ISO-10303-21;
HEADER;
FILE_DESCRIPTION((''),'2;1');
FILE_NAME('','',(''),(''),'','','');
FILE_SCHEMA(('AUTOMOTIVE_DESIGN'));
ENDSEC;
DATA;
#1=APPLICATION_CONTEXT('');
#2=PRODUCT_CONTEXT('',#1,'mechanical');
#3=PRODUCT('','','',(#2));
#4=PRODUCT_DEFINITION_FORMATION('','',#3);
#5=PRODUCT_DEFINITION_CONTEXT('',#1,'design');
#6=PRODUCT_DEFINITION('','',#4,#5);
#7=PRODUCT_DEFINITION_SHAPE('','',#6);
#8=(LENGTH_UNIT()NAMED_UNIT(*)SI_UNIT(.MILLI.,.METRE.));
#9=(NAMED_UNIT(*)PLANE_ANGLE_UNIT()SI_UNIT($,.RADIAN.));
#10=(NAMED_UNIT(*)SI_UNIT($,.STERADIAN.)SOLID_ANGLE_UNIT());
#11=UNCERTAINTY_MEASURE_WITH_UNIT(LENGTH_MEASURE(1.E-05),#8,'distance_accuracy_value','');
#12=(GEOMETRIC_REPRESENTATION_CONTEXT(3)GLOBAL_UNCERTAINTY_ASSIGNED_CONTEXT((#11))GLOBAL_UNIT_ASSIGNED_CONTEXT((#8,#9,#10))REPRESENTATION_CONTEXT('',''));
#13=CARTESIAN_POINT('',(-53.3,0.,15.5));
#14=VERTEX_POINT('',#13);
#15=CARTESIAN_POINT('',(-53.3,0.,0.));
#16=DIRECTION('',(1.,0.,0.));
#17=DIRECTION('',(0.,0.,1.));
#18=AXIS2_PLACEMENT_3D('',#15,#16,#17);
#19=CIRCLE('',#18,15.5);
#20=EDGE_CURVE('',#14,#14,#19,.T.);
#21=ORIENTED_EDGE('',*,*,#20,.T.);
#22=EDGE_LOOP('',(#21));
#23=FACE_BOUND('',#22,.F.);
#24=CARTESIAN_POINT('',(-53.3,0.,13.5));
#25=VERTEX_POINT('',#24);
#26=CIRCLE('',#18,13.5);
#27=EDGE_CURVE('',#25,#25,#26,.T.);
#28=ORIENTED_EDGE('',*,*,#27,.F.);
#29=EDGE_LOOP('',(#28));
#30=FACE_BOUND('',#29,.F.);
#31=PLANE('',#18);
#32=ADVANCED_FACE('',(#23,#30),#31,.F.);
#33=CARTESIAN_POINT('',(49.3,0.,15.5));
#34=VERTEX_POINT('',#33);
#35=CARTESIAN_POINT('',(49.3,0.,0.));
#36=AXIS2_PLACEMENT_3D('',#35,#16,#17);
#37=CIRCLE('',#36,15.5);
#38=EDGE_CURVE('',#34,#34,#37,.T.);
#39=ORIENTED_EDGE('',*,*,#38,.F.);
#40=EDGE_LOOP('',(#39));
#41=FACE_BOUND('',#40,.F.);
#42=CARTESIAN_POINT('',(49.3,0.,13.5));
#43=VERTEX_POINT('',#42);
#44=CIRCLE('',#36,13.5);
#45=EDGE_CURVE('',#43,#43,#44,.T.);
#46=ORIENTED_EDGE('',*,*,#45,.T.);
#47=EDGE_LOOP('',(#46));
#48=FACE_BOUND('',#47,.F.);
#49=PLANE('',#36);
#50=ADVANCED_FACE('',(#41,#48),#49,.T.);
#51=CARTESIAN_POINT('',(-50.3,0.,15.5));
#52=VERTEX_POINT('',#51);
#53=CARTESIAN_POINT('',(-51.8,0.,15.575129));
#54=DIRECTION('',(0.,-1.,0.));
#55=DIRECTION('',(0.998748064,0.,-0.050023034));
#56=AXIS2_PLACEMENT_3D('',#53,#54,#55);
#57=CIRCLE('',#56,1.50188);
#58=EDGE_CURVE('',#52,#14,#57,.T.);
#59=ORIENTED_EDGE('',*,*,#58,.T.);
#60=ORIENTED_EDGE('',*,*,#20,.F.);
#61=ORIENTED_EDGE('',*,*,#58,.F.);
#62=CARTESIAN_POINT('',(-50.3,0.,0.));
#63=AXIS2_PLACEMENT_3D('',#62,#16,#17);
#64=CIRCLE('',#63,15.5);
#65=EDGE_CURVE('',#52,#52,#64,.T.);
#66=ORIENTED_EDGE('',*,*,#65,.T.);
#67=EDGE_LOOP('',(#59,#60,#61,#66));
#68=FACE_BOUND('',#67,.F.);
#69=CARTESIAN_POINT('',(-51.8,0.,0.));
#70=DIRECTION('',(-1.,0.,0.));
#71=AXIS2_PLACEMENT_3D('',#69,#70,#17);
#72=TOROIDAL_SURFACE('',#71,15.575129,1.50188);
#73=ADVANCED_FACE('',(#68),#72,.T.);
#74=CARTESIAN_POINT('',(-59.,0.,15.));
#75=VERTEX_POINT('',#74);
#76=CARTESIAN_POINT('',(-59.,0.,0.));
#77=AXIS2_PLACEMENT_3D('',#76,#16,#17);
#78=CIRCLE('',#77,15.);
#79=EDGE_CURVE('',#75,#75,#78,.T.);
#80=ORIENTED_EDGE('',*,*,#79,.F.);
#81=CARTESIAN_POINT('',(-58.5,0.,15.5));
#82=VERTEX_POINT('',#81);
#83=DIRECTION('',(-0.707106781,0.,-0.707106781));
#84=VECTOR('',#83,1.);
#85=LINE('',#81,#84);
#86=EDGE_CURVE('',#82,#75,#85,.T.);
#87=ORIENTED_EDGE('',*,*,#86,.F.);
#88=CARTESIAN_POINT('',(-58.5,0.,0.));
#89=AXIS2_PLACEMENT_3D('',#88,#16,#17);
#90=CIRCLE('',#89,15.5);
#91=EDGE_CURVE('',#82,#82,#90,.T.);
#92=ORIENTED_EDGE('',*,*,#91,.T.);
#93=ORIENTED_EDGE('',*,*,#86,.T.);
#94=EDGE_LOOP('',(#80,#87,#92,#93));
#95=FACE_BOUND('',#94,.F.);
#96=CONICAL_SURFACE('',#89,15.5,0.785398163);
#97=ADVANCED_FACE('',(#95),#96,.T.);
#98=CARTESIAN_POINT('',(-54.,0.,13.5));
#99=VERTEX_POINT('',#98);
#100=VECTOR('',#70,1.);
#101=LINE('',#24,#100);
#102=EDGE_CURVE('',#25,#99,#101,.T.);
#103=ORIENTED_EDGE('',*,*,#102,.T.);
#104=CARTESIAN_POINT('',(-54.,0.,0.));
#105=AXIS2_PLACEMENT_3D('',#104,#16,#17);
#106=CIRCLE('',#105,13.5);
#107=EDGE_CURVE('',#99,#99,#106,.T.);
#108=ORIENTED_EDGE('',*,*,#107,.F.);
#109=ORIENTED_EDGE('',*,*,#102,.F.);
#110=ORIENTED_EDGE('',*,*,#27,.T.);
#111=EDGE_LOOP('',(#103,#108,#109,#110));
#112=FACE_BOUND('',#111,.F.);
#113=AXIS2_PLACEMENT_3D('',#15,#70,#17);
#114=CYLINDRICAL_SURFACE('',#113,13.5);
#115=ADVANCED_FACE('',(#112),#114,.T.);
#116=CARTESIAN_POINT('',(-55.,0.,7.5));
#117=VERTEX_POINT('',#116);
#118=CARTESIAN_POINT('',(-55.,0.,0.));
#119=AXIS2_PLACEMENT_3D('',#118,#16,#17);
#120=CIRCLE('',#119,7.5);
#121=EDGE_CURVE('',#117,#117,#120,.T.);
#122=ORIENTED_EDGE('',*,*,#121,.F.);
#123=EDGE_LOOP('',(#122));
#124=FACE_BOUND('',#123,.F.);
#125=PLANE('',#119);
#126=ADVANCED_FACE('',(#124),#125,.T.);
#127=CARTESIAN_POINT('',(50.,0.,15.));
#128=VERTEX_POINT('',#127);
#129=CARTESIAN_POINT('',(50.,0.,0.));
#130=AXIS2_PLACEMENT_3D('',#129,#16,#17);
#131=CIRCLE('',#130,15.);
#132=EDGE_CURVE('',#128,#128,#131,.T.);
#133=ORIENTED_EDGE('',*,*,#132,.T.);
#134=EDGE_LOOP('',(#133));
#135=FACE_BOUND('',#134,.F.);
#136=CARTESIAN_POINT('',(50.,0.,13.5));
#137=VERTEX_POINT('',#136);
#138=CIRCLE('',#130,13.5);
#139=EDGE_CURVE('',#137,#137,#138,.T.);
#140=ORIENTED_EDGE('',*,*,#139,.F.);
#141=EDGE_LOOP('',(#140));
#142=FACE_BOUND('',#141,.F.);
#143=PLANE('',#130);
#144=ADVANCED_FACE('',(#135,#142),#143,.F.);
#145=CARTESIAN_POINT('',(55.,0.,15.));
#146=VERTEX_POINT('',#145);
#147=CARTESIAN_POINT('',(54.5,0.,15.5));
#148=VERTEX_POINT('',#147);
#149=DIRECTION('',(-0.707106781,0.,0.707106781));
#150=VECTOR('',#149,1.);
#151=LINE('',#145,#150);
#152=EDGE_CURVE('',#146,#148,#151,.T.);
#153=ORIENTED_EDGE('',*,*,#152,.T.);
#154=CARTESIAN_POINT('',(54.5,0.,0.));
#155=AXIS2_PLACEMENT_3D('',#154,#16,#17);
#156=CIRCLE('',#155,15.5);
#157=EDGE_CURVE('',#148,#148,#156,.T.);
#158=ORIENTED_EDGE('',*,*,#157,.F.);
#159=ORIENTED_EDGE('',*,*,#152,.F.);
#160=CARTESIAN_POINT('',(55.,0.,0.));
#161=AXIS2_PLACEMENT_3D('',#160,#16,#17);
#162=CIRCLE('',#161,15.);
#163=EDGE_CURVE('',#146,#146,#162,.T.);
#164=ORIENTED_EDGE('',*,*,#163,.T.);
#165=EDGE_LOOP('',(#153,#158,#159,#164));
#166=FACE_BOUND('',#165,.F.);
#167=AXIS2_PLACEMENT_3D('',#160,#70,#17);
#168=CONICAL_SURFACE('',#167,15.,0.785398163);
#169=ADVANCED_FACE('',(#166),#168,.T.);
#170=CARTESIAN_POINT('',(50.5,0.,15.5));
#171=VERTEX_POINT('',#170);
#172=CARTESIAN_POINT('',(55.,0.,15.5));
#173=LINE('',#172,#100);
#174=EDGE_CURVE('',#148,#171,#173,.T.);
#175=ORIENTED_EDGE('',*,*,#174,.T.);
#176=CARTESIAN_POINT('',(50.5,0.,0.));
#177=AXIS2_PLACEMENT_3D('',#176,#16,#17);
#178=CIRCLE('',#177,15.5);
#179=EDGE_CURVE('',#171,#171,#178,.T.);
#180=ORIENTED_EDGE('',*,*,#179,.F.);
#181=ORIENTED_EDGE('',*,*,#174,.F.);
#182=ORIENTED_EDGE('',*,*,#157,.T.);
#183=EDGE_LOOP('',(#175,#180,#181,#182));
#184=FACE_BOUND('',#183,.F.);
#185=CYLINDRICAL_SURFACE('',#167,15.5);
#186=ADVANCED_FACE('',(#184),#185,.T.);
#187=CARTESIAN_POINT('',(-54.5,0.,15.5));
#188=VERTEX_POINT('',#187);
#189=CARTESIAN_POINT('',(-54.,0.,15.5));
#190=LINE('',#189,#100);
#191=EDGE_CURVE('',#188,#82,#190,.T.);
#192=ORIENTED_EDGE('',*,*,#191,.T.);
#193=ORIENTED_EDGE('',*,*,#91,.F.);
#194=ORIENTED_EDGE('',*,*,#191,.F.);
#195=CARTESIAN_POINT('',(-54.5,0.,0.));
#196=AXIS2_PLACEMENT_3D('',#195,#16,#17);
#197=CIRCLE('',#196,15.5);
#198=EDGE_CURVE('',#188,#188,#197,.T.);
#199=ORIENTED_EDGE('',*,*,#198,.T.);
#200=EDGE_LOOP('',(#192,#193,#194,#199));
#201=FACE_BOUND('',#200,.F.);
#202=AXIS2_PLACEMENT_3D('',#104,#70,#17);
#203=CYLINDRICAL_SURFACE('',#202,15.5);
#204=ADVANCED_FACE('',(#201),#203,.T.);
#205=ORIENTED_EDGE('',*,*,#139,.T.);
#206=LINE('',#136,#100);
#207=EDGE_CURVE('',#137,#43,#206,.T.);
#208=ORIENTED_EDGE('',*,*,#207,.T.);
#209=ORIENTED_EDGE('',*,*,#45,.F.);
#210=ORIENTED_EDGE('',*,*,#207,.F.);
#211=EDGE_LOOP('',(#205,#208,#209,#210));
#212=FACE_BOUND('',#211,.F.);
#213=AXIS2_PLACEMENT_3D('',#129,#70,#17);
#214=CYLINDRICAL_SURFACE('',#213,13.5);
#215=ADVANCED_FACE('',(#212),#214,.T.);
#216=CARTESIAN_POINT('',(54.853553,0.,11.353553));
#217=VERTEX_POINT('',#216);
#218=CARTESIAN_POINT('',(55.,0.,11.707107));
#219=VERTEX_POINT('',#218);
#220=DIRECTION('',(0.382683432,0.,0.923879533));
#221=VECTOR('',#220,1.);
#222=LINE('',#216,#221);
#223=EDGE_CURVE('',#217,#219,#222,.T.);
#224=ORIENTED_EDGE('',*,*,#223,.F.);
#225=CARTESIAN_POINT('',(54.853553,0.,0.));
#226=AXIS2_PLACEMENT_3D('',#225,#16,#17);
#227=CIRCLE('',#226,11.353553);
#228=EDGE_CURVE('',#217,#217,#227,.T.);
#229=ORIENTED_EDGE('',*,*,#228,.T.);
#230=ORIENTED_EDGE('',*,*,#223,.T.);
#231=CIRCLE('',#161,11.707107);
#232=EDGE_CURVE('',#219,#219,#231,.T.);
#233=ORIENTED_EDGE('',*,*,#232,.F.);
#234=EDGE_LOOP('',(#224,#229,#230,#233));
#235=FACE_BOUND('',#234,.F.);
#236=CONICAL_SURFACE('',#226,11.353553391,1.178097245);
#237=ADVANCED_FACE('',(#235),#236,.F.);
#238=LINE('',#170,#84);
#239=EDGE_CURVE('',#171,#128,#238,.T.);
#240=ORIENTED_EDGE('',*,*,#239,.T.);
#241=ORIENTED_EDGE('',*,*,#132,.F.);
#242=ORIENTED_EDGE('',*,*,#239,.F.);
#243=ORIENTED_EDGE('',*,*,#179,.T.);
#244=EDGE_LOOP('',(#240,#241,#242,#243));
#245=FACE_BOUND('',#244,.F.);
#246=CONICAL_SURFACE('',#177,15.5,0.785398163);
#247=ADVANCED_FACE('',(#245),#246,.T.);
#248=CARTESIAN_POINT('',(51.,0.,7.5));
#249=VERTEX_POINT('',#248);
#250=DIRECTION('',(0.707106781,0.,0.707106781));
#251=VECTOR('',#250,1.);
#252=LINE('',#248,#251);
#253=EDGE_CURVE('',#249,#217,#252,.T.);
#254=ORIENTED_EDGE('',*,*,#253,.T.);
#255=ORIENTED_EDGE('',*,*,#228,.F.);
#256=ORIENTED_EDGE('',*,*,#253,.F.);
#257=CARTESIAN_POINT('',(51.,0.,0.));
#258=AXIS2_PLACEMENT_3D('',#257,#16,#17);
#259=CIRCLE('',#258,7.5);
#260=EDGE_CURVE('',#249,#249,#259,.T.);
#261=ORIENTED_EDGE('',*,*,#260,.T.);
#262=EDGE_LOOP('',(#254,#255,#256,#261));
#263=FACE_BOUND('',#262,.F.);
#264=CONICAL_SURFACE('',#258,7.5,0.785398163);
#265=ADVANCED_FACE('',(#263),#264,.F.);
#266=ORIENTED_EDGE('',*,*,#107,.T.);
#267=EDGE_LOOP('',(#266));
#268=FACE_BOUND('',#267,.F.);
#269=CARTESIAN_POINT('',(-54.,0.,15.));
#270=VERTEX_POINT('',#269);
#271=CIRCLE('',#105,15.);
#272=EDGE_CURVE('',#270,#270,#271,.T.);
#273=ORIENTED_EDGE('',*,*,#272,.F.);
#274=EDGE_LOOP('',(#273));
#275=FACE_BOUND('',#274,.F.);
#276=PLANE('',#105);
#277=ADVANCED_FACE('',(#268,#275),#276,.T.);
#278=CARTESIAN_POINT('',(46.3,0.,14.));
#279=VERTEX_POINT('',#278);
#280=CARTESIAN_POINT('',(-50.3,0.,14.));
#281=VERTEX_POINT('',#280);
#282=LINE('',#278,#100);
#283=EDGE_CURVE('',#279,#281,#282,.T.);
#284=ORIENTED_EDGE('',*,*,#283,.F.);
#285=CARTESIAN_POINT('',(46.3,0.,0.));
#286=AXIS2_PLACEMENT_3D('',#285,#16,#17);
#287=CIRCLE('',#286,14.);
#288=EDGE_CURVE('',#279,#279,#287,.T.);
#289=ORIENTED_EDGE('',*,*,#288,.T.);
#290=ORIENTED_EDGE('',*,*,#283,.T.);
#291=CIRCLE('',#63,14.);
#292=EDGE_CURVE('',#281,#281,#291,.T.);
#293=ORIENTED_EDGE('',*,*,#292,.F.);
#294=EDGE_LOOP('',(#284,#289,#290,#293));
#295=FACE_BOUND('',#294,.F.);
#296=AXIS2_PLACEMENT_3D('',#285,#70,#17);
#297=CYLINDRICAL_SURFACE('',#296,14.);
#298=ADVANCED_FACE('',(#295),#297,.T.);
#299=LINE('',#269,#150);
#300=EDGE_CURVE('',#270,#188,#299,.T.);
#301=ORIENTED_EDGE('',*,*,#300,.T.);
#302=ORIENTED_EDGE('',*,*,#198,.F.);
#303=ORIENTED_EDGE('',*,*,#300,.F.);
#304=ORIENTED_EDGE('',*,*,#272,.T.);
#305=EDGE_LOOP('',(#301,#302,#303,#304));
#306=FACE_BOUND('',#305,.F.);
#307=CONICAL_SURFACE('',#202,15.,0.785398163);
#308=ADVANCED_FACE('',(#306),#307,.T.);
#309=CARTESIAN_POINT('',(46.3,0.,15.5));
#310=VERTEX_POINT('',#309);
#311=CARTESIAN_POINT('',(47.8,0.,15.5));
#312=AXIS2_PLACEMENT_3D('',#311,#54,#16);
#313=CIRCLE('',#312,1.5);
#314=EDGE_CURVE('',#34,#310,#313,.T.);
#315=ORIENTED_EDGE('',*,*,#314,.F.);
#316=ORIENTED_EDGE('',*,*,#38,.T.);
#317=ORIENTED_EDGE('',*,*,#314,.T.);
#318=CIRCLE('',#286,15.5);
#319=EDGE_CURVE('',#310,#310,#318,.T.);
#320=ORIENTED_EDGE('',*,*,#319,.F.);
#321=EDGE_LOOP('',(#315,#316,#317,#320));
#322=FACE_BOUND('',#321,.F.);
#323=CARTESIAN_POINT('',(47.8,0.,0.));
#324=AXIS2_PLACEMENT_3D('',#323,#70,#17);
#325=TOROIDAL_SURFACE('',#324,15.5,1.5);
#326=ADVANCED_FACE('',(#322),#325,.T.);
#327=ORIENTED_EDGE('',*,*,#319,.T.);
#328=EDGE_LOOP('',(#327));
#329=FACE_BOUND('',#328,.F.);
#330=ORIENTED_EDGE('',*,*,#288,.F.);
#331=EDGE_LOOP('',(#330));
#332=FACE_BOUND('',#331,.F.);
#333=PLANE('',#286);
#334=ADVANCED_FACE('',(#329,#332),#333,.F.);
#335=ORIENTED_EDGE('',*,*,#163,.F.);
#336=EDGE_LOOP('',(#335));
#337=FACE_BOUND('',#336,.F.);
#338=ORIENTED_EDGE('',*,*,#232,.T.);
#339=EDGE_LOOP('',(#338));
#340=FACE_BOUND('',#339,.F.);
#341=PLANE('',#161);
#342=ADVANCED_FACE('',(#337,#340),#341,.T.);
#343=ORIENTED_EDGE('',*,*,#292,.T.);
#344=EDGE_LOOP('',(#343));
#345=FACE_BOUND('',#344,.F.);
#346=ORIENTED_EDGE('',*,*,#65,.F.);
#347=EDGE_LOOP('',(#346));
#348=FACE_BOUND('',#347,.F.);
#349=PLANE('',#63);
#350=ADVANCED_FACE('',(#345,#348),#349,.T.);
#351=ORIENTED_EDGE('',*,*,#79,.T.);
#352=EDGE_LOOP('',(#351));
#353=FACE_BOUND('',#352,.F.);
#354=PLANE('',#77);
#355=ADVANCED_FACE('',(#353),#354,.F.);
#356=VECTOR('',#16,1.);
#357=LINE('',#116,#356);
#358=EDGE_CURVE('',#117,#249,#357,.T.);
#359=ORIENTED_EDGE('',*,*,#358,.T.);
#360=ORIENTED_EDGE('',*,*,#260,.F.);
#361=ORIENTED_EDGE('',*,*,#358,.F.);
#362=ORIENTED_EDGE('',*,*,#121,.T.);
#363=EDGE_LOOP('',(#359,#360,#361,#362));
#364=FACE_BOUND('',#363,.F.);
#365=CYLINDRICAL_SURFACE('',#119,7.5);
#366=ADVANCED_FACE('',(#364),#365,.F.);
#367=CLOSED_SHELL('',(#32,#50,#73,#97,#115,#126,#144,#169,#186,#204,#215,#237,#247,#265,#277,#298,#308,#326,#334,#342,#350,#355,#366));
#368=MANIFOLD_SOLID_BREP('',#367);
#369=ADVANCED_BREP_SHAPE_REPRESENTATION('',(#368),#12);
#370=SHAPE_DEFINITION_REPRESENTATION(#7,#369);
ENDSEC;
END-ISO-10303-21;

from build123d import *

# Parameters (mm, degrees)
F2_SIZE = 4


# Not quite as in the source:
# - a fillet or chamfer that OpenCascade refuses, or shapes differently, is made with other operations: its cross-section is extruded or revolved along the edge and cut away or added


with BuildPart() as f1:
    # F0 (on Front) → F1 (revolve)
    with BuildSketch(Plane.XZ):
        with BuildLine():
            Line((-55, 0), (-55, 7.5))
            Line((-55, 7.5), (55, 7.5))
            Line((55, 7.5), (55, 15.5))
            Line((55, 15.5), (50, 15.5))
            Line((50, 15.5), (50, 13.5))
            Line((50, 13.5), (49.3, 13.5))
            Line((49.3, 13.5), (49.3, 15.5))
            ThreePointArc((49.3, 15.5), (47.8, 17), (46.3, 15.5))
            Line((46.3, 15.5), (46.3, 14))
            Line((46.3, 14), (-50.3, 14))
            Line((-50.3, 14), (-50.3, 15.5))
            ThreePointArc((-50.3, 15.5), (-51.8, 17.0770088649), (-53.3, 15.5))
            Line((-53.3, 15.5), (-53.3, 13.5))
            Line((-53.3, 13.5), (-54, 13.5))
            Line((-54, 13.5), (-54, 15.5))
            Line((-54, 15.5), (-59, 15.5))
            Line((-59, 15.5), (-59, 0))
            Line((-59, 0), (-55, 0))
        make_face()
    revolve(axis=Axis((-4.5135766268, 0, 0), (1, 0, 0)))

    # F2
    f2_edges = [f1.edges().sort_by_distance(p)[0] for p in [
        (55, 0, -7.5),
    ]]
    chamfer(f2_edges, length=F2_SIZE)

    # F3: chamfer of 0.5 on 5 edges, made by hand

    # F3_s1 → F3_t2 (revolve, cut)
    with BuildSketch(Plane.XZ):
        Polygon((55, 15), (54.5, 15.5), (55, 15.5), align=None)
    revolve(axis=Axis((55, 0, 0), (1, 0, 0)), mode=Mode.SUBTRACT)

    # F3_s3 → F3_t4 (revolve, cut)
    with BuildSketch(Plane.XZ):
        Polygon((54.8535533906, 11.3535533906), (55, 11.7071067812), (55, 11.5), align=None)
    revolve(axis=Axis((55, 0, 0), (1, 0, 0)), mode=Mode.SUBTRACT)

    # F3_s5 → F3_t6 (revolve, cut)
    with BuildSketch(Plane.XZ):
        Polygon((-58.5, 15.5), (-59, 15), (-59, 15.5), align=None)
    revolve(axis=Axis((-59, 0, 0), (1, 0, 0)), mode=Mode.SUBTRACT)

    # F3_s7 → F3_t8 (revolve, cut)
    with BuildSketch(Plane.XZ):
        Polygon((-54, 15), (-54.5, 15.5), (-54, 15.5), align=None)
    revolve(axis=Axis((-54, 0, 0), (1, 0, 0)), mode=Mode.SUBTRACT)

    # F3_s9 → F3_t10 (revolve, cut)
    with BuildSketch(Plane.XZ):
        Polygon((50.5, 15.5), (50, 15), (50, 15.5), align=None)
    revolve(axis=Axis((50, 0, 0), (1, 0, 0)), mode=Mode.SUBTRACT)


solid = f1.part
